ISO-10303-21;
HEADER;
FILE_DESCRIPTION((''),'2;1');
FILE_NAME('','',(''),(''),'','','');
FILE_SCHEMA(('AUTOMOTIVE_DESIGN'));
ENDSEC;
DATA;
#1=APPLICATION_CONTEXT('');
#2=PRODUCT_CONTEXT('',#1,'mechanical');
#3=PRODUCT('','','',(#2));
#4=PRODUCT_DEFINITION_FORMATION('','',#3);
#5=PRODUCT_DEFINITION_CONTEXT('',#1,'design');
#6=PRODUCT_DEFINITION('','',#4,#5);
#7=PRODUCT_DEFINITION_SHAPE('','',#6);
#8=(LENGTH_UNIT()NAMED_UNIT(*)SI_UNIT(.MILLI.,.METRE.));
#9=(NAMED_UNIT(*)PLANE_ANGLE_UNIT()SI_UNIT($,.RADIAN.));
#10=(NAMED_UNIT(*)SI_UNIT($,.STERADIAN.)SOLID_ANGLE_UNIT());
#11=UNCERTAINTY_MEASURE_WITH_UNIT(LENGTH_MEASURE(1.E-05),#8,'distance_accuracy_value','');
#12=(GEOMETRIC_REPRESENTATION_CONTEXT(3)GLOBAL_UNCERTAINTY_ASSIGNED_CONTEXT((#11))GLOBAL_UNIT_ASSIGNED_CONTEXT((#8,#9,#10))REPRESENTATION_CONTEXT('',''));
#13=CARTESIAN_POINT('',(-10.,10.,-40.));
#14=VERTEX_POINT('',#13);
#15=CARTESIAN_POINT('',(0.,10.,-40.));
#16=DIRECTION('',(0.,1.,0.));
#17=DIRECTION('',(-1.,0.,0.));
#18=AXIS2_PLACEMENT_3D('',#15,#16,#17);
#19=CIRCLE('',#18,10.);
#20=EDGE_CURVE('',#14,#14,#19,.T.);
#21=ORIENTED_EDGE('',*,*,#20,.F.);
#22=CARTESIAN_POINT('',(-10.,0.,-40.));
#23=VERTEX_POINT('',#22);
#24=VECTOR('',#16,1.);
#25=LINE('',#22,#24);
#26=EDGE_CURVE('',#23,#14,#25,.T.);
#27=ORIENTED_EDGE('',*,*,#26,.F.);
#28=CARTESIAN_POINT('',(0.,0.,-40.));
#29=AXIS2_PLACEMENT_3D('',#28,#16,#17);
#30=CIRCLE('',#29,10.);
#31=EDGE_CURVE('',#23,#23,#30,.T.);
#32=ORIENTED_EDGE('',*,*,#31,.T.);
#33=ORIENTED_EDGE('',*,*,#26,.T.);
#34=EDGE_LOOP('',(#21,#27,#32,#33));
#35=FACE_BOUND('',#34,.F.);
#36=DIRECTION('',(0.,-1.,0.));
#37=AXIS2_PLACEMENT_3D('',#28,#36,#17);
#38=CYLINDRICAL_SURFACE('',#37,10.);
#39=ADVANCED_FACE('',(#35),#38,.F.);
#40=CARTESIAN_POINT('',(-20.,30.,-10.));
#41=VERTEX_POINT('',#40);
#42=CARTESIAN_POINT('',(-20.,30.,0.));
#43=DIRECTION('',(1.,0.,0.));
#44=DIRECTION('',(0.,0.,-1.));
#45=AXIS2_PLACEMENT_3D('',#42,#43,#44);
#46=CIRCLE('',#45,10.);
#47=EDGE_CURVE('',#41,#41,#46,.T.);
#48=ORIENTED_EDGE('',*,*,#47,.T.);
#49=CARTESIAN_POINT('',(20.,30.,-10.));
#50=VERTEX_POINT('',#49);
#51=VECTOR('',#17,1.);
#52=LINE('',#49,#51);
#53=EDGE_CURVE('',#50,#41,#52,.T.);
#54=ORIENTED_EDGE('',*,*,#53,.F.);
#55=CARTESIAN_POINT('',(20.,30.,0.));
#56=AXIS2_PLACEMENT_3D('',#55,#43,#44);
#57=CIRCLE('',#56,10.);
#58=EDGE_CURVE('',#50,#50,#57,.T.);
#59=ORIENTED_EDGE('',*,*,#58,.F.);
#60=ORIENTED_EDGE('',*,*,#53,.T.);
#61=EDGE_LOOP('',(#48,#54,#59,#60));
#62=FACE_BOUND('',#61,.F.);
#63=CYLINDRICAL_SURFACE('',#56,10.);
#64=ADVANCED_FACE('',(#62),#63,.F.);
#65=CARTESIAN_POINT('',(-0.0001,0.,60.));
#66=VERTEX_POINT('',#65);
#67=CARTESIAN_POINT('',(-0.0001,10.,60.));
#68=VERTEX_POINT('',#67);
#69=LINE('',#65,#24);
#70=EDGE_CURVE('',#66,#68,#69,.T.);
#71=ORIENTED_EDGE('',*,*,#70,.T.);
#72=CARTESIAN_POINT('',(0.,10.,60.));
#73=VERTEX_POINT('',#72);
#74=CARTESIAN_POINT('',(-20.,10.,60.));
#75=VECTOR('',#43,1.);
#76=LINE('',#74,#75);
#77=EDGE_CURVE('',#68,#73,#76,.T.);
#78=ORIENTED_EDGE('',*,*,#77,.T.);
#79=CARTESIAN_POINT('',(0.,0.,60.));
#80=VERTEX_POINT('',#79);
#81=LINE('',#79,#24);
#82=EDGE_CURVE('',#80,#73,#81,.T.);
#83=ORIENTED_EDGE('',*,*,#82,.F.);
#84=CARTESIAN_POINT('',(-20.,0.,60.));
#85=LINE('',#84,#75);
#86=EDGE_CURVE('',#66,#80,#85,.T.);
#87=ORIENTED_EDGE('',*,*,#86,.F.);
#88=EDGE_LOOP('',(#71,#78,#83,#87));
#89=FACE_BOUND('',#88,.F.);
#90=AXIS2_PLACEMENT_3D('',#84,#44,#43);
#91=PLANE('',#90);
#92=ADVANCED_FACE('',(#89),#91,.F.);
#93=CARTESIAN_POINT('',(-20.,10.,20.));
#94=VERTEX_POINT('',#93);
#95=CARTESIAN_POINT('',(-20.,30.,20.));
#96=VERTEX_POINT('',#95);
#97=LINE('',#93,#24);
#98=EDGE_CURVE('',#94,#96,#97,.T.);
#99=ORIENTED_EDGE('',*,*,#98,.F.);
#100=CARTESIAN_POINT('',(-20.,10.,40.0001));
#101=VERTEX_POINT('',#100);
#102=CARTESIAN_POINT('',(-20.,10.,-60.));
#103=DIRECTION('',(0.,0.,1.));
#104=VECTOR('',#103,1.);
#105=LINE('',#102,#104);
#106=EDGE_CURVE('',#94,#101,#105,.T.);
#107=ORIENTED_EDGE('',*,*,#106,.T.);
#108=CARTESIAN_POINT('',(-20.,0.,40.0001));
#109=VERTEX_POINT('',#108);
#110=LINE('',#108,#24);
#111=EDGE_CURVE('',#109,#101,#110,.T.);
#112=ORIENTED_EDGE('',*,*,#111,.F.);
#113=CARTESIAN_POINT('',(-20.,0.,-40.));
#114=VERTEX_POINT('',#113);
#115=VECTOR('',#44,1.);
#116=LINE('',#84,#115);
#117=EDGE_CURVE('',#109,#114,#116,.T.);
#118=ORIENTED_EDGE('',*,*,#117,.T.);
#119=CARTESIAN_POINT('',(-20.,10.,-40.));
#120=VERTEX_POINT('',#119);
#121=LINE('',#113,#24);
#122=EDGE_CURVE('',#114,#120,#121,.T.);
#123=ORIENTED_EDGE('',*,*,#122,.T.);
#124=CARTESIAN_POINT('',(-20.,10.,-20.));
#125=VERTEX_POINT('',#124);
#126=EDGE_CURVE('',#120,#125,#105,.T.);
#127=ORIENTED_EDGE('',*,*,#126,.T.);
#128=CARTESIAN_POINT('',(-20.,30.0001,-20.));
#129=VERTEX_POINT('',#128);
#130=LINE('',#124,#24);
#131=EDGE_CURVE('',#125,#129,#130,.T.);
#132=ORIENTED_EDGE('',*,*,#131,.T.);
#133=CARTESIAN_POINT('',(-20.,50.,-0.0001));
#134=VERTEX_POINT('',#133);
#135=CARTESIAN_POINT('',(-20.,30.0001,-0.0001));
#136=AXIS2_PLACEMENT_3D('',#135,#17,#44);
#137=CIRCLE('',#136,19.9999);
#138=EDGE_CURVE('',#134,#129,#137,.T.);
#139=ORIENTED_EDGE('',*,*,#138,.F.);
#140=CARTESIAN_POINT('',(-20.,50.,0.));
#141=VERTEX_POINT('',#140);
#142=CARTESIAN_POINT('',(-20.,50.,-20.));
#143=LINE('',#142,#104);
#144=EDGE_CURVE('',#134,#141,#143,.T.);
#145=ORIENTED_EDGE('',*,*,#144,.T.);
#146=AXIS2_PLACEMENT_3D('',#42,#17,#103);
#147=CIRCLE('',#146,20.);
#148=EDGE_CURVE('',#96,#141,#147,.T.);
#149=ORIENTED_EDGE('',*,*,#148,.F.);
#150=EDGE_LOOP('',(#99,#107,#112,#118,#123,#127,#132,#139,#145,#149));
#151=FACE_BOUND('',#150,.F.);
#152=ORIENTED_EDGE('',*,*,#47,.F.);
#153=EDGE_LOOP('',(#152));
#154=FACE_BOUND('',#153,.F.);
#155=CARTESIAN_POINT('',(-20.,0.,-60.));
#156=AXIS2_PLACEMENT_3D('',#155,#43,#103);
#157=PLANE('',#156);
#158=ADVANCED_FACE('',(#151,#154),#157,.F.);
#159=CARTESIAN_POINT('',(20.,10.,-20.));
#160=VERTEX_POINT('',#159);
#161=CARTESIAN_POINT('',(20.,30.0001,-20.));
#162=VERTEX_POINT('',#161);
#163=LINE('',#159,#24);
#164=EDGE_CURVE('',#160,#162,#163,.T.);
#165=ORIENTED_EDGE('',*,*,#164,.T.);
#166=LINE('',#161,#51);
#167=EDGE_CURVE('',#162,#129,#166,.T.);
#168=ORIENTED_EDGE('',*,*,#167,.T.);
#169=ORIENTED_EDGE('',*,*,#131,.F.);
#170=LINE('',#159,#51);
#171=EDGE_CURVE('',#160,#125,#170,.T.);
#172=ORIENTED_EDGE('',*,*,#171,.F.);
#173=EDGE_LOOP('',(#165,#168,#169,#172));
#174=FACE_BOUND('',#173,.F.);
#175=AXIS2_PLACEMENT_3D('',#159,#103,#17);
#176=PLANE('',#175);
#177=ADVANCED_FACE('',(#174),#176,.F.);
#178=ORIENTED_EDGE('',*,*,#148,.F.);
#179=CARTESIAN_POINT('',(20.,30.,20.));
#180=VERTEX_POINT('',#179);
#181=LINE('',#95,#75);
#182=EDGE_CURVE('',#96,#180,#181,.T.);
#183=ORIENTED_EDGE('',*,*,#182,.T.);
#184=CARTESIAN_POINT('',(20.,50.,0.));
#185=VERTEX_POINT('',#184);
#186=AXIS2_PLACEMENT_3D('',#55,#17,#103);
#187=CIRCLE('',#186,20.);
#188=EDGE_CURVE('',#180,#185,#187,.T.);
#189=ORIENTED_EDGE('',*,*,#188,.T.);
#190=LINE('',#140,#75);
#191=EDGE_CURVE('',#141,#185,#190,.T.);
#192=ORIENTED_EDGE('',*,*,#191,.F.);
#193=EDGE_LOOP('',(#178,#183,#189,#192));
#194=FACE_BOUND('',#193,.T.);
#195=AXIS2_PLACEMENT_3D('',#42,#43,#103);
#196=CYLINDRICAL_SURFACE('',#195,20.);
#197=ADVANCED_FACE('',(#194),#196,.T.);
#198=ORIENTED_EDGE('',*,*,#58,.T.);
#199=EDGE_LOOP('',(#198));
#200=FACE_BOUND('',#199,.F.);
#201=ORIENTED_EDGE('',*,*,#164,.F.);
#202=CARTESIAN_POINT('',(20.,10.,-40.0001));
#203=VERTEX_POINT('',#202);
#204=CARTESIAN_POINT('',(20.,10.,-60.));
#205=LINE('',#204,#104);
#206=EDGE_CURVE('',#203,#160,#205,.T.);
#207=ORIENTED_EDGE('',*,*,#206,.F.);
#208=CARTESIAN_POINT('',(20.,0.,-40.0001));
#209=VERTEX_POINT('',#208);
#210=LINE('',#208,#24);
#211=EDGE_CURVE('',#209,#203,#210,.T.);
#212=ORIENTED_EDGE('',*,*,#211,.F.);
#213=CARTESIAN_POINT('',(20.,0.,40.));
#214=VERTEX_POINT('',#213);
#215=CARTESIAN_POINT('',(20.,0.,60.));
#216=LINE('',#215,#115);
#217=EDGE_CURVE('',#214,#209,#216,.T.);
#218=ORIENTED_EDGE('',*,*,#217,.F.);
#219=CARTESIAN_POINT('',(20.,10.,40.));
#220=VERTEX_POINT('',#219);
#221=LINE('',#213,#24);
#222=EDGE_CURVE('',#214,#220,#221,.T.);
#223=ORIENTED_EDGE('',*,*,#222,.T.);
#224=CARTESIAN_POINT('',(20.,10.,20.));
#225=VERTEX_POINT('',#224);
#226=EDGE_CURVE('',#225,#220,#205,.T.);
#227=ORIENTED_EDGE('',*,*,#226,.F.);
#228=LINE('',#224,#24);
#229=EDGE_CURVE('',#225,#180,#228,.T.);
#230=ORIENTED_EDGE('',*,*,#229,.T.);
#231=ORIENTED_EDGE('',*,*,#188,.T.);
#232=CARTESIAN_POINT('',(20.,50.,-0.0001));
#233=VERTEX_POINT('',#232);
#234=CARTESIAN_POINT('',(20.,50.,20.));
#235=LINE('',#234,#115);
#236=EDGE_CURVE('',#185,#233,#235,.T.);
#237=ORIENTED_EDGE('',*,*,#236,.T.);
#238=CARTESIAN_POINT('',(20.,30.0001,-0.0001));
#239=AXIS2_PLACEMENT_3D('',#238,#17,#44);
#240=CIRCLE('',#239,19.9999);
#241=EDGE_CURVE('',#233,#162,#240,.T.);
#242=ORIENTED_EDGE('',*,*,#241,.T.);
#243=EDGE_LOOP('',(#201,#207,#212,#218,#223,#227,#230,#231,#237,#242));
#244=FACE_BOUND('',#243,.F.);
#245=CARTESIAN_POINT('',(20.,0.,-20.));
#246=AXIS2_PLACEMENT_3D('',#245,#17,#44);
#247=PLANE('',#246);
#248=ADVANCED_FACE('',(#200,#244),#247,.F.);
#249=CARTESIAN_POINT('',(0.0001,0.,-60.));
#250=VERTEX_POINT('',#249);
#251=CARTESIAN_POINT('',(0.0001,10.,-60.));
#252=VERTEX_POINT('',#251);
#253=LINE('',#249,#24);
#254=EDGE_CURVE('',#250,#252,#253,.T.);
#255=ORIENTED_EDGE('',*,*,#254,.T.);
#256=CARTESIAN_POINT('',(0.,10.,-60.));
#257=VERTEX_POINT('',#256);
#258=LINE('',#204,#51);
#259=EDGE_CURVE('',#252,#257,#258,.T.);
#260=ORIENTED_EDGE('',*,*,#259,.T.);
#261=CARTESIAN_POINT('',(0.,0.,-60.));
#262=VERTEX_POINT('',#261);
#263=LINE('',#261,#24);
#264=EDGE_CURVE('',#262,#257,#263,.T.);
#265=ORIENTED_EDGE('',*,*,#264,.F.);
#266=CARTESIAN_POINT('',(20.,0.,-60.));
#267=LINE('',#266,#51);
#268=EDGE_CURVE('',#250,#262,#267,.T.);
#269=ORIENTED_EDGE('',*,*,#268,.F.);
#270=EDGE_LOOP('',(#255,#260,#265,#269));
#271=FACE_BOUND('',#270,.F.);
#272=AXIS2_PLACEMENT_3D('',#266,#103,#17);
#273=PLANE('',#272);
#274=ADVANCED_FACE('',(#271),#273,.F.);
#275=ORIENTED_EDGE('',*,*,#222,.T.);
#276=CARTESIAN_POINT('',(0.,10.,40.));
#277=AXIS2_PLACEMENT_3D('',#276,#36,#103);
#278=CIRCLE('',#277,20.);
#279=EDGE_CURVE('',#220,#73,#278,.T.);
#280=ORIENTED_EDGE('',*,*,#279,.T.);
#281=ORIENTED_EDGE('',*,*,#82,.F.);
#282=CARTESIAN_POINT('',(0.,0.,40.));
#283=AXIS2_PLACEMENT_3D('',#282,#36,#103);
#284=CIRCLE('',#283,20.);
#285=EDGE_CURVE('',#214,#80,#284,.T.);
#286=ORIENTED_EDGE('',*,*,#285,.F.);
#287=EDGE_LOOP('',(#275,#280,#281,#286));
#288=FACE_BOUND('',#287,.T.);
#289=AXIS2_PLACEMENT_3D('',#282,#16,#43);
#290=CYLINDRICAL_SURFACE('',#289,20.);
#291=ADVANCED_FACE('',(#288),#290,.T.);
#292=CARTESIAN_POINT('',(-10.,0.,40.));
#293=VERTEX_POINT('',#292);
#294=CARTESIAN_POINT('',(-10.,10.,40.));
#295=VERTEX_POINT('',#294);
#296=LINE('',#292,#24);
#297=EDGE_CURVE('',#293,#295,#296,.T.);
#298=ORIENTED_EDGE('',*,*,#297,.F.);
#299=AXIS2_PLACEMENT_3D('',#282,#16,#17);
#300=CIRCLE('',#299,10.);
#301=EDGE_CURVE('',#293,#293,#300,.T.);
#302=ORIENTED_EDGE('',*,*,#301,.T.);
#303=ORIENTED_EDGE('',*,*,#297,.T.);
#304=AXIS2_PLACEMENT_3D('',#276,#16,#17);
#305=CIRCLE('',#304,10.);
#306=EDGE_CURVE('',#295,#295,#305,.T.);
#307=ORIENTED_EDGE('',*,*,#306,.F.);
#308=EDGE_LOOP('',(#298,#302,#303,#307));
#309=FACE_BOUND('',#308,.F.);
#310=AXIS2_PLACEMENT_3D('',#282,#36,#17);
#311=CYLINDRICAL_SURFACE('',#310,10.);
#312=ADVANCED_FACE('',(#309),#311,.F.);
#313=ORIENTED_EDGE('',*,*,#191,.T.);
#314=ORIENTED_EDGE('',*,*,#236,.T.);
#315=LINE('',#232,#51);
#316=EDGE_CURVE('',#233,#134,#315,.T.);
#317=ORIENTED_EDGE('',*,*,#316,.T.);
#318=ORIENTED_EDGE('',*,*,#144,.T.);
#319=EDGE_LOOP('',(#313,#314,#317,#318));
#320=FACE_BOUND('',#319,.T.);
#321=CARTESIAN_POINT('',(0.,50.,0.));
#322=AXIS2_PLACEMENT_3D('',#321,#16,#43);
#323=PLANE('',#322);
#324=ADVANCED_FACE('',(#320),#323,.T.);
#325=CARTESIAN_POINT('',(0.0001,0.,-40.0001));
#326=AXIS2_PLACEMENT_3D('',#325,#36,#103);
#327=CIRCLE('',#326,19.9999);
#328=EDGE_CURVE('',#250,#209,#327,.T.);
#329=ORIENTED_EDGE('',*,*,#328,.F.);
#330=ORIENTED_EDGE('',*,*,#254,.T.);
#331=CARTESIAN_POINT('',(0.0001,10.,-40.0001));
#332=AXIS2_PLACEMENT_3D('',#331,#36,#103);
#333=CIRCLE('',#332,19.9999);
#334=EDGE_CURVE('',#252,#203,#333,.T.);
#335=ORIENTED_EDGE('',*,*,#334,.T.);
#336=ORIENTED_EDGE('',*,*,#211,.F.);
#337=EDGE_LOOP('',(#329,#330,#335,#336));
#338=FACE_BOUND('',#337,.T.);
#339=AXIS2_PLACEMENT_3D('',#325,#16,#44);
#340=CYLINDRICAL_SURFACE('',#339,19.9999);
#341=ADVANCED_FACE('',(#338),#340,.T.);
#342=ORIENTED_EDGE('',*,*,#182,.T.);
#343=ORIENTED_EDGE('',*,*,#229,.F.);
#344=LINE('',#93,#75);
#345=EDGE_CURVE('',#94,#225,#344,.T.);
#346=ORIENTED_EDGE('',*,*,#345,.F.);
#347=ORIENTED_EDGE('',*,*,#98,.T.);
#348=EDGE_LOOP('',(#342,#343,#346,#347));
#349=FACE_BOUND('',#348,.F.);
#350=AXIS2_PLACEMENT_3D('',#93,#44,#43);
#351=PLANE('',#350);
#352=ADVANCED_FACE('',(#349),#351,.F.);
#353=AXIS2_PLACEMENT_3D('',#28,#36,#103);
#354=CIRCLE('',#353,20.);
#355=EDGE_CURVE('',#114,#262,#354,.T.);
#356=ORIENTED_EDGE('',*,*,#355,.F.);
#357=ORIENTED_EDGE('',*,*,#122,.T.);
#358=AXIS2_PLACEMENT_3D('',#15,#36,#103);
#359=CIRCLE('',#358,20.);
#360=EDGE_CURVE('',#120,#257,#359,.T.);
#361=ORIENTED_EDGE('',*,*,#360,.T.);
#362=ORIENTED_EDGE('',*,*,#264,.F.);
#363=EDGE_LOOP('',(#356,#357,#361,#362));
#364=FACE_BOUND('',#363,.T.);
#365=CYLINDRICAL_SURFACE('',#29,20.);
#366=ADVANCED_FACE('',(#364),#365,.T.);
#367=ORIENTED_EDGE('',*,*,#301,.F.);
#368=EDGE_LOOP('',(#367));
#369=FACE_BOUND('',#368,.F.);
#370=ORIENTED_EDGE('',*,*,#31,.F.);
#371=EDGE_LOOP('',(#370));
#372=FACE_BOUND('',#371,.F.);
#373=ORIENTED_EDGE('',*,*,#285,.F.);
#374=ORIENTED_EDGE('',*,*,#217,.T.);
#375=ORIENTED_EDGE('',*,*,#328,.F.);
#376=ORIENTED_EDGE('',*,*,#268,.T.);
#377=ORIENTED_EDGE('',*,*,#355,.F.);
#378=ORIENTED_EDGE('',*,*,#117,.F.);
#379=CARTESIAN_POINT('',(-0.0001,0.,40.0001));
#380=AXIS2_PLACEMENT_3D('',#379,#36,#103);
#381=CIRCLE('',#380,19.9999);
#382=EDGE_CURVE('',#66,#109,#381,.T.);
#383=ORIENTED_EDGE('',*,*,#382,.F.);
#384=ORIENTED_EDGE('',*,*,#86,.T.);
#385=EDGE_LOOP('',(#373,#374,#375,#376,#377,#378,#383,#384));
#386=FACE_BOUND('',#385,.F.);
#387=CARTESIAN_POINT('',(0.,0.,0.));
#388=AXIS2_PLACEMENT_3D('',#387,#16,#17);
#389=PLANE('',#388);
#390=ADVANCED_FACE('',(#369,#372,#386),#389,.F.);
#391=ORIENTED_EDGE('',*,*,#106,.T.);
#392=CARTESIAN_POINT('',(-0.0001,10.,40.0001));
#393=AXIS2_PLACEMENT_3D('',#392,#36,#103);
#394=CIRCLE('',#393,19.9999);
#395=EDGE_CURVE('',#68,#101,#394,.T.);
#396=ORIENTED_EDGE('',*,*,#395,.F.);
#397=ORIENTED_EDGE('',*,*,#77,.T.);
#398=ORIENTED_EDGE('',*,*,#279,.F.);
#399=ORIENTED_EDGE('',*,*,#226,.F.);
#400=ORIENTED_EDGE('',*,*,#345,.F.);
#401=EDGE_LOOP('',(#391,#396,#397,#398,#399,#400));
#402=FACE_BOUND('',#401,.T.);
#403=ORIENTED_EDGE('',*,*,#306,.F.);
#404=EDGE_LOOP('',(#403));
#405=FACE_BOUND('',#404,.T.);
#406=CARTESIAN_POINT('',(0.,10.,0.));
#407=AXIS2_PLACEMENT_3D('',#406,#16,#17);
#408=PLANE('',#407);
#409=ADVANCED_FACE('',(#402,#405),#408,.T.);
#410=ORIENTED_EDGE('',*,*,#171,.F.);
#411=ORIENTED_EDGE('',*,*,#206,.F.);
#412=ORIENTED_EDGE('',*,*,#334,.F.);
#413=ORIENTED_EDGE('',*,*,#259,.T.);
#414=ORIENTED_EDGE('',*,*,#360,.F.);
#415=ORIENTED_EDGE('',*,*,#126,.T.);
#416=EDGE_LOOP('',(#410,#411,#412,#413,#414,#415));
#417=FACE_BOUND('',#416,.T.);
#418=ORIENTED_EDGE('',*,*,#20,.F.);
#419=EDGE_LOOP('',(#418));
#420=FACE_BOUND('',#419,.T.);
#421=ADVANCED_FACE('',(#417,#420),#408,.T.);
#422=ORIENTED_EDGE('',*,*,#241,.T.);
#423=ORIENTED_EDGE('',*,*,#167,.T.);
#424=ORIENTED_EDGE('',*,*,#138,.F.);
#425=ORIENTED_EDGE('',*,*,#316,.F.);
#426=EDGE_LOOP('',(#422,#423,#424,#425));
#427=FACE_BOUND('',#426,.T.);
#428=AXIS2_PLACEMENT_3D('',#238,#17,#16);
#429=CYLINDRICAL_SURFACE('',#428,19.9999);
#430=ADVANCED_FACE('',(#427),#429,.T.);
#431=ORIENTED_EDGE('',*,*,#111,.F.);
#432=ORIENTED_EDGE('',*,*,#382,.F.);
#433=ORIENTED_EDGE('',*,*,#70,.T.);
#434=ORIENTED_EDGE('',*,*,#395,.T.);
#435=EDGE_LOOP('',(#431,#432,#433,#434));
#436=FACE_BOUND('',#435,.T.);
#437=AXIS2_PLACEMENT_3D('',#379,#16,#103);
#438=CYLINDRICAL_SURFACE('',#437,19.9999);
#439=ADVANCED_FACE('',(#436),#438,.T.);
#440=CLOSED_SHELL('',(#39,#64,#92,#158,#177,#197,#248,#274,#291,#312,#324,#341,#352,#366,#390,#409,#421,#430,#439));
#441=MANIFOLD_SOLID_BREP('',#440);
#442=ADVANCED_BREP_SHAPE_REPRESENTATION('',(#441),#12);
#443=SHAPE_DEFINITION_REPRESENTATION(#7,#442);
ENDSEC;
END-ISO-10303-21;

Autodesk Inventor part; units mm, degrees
ref_plane "YZ Plane" through (0, 0, 0) normal (1, 0, 0) x (0, 1, 0)
ref_plane "XZ Plane" through (0, 0, 0) normal (0, 1, 0) x (-1, 0, 0)
ref_plane "XY Plane" through (0, 0, 0) normal (0, 0, 1) x (1, 0, 0)
sketch "Boceto1" plane through (0, 0, 0) normal (0, 1, 0) x (-1, 0, 0)
  line L0 (-20, -60) -> (20, -60)
  line L1 (20, -60) -> (20, 60)
  line L2 (20, 60) -> (-20, 60)
  line L3 (-20, 60) -> (-20, -60)
  line L4 (-20, -60) -> (20, 60) construction
  line L5 (20, -60) -> (-20, 60) construction
  line L6 (20, 60) -> (-20, 60)
  line L7 (-20, 60) -> (-20, 20)
  line L8 (-20, 20) -> (20, 20)
  line L9 (20, 20) -> (20, 60)
  line L10 (20, -60) -> (-20, -60)
  line L11 (-20, -60) -> (-20, -20)
  line L12 (-20, -20) -> (20, -20)
  line L13 (20, -20) -> (20, -60)
  circle A0 centre (0, 40) radius 10
  circle A1 centre (0, -40) radius 10
  line L14 (20, 20) -> (-20, 20)
  line L15 (-20, 20) -> (-20, -20)
  line L16 (-20, -20) -> (20, -20)
  line L17 (20, -20) -> (20, 20)
  point P0 (0, 0)
  dimension "d0" = 40
  dimension "d1" = 120
  dimension "d2" = 40
  dimension "d3" = 40
  dimension "d4" = 40
  dimension "d5" = 20
  dimension "d7" = 20
extrude "Extrusión1" add sketch "Boceto1" along normal blind 10
sketch "Boceto2" plane through (0, 10, 0) normal (0, 1, 0) x (1, 0, 0)
  line L0 (-20, -20) -> (20, -20)
  line L1 (20, -20) -> (20, 20)
  line L2 (20, 20) -> (-20, 20)
  line L3 (-20, 20) -> (-20, -20)
  line L4 (-20, -20) -> (20, 20) construction
  line L5 (20, -20) -> (-20, 20) construction
  point P0 (0, 0)
  dimension "d10" = 40
  dimension "d11" = 40
extrude "Extrusión2" add sketch "Boceto2" along normal blind 40
fillet "Empalme de cara1" radius 20 1 edges at (20, 5, 60)
fillet "Empalme de cara2" radius 20 1 edges at (-20, 5, 60)
fillet "Empalme de cara3" radius 20 1 edges at (-20, 5, -60)
fillet "Empalme de cara4" radius 20 1 edges at (20, 5, -60)
sketch "Boceto3" plane through (20, 10, -20) normal (1, 0, 0) x (0, 0, -1)
  line L0 (-60, 0) -> (-40, 0) projected
  circle A0 centre (-20, 20) radius 10
  point P0 (-20, -10)
  dimension "d22" = 20
extrude "Extrusión3" cut sketch "Boceto3" against normal blind 40
fillet "Empalme de cara5" radius 20 1 edges at (0, 50, 20)
fillet "Empalme de cara6" radius 20 1 edges at (0, 50, -20)
properties part number "Tarea 1"
